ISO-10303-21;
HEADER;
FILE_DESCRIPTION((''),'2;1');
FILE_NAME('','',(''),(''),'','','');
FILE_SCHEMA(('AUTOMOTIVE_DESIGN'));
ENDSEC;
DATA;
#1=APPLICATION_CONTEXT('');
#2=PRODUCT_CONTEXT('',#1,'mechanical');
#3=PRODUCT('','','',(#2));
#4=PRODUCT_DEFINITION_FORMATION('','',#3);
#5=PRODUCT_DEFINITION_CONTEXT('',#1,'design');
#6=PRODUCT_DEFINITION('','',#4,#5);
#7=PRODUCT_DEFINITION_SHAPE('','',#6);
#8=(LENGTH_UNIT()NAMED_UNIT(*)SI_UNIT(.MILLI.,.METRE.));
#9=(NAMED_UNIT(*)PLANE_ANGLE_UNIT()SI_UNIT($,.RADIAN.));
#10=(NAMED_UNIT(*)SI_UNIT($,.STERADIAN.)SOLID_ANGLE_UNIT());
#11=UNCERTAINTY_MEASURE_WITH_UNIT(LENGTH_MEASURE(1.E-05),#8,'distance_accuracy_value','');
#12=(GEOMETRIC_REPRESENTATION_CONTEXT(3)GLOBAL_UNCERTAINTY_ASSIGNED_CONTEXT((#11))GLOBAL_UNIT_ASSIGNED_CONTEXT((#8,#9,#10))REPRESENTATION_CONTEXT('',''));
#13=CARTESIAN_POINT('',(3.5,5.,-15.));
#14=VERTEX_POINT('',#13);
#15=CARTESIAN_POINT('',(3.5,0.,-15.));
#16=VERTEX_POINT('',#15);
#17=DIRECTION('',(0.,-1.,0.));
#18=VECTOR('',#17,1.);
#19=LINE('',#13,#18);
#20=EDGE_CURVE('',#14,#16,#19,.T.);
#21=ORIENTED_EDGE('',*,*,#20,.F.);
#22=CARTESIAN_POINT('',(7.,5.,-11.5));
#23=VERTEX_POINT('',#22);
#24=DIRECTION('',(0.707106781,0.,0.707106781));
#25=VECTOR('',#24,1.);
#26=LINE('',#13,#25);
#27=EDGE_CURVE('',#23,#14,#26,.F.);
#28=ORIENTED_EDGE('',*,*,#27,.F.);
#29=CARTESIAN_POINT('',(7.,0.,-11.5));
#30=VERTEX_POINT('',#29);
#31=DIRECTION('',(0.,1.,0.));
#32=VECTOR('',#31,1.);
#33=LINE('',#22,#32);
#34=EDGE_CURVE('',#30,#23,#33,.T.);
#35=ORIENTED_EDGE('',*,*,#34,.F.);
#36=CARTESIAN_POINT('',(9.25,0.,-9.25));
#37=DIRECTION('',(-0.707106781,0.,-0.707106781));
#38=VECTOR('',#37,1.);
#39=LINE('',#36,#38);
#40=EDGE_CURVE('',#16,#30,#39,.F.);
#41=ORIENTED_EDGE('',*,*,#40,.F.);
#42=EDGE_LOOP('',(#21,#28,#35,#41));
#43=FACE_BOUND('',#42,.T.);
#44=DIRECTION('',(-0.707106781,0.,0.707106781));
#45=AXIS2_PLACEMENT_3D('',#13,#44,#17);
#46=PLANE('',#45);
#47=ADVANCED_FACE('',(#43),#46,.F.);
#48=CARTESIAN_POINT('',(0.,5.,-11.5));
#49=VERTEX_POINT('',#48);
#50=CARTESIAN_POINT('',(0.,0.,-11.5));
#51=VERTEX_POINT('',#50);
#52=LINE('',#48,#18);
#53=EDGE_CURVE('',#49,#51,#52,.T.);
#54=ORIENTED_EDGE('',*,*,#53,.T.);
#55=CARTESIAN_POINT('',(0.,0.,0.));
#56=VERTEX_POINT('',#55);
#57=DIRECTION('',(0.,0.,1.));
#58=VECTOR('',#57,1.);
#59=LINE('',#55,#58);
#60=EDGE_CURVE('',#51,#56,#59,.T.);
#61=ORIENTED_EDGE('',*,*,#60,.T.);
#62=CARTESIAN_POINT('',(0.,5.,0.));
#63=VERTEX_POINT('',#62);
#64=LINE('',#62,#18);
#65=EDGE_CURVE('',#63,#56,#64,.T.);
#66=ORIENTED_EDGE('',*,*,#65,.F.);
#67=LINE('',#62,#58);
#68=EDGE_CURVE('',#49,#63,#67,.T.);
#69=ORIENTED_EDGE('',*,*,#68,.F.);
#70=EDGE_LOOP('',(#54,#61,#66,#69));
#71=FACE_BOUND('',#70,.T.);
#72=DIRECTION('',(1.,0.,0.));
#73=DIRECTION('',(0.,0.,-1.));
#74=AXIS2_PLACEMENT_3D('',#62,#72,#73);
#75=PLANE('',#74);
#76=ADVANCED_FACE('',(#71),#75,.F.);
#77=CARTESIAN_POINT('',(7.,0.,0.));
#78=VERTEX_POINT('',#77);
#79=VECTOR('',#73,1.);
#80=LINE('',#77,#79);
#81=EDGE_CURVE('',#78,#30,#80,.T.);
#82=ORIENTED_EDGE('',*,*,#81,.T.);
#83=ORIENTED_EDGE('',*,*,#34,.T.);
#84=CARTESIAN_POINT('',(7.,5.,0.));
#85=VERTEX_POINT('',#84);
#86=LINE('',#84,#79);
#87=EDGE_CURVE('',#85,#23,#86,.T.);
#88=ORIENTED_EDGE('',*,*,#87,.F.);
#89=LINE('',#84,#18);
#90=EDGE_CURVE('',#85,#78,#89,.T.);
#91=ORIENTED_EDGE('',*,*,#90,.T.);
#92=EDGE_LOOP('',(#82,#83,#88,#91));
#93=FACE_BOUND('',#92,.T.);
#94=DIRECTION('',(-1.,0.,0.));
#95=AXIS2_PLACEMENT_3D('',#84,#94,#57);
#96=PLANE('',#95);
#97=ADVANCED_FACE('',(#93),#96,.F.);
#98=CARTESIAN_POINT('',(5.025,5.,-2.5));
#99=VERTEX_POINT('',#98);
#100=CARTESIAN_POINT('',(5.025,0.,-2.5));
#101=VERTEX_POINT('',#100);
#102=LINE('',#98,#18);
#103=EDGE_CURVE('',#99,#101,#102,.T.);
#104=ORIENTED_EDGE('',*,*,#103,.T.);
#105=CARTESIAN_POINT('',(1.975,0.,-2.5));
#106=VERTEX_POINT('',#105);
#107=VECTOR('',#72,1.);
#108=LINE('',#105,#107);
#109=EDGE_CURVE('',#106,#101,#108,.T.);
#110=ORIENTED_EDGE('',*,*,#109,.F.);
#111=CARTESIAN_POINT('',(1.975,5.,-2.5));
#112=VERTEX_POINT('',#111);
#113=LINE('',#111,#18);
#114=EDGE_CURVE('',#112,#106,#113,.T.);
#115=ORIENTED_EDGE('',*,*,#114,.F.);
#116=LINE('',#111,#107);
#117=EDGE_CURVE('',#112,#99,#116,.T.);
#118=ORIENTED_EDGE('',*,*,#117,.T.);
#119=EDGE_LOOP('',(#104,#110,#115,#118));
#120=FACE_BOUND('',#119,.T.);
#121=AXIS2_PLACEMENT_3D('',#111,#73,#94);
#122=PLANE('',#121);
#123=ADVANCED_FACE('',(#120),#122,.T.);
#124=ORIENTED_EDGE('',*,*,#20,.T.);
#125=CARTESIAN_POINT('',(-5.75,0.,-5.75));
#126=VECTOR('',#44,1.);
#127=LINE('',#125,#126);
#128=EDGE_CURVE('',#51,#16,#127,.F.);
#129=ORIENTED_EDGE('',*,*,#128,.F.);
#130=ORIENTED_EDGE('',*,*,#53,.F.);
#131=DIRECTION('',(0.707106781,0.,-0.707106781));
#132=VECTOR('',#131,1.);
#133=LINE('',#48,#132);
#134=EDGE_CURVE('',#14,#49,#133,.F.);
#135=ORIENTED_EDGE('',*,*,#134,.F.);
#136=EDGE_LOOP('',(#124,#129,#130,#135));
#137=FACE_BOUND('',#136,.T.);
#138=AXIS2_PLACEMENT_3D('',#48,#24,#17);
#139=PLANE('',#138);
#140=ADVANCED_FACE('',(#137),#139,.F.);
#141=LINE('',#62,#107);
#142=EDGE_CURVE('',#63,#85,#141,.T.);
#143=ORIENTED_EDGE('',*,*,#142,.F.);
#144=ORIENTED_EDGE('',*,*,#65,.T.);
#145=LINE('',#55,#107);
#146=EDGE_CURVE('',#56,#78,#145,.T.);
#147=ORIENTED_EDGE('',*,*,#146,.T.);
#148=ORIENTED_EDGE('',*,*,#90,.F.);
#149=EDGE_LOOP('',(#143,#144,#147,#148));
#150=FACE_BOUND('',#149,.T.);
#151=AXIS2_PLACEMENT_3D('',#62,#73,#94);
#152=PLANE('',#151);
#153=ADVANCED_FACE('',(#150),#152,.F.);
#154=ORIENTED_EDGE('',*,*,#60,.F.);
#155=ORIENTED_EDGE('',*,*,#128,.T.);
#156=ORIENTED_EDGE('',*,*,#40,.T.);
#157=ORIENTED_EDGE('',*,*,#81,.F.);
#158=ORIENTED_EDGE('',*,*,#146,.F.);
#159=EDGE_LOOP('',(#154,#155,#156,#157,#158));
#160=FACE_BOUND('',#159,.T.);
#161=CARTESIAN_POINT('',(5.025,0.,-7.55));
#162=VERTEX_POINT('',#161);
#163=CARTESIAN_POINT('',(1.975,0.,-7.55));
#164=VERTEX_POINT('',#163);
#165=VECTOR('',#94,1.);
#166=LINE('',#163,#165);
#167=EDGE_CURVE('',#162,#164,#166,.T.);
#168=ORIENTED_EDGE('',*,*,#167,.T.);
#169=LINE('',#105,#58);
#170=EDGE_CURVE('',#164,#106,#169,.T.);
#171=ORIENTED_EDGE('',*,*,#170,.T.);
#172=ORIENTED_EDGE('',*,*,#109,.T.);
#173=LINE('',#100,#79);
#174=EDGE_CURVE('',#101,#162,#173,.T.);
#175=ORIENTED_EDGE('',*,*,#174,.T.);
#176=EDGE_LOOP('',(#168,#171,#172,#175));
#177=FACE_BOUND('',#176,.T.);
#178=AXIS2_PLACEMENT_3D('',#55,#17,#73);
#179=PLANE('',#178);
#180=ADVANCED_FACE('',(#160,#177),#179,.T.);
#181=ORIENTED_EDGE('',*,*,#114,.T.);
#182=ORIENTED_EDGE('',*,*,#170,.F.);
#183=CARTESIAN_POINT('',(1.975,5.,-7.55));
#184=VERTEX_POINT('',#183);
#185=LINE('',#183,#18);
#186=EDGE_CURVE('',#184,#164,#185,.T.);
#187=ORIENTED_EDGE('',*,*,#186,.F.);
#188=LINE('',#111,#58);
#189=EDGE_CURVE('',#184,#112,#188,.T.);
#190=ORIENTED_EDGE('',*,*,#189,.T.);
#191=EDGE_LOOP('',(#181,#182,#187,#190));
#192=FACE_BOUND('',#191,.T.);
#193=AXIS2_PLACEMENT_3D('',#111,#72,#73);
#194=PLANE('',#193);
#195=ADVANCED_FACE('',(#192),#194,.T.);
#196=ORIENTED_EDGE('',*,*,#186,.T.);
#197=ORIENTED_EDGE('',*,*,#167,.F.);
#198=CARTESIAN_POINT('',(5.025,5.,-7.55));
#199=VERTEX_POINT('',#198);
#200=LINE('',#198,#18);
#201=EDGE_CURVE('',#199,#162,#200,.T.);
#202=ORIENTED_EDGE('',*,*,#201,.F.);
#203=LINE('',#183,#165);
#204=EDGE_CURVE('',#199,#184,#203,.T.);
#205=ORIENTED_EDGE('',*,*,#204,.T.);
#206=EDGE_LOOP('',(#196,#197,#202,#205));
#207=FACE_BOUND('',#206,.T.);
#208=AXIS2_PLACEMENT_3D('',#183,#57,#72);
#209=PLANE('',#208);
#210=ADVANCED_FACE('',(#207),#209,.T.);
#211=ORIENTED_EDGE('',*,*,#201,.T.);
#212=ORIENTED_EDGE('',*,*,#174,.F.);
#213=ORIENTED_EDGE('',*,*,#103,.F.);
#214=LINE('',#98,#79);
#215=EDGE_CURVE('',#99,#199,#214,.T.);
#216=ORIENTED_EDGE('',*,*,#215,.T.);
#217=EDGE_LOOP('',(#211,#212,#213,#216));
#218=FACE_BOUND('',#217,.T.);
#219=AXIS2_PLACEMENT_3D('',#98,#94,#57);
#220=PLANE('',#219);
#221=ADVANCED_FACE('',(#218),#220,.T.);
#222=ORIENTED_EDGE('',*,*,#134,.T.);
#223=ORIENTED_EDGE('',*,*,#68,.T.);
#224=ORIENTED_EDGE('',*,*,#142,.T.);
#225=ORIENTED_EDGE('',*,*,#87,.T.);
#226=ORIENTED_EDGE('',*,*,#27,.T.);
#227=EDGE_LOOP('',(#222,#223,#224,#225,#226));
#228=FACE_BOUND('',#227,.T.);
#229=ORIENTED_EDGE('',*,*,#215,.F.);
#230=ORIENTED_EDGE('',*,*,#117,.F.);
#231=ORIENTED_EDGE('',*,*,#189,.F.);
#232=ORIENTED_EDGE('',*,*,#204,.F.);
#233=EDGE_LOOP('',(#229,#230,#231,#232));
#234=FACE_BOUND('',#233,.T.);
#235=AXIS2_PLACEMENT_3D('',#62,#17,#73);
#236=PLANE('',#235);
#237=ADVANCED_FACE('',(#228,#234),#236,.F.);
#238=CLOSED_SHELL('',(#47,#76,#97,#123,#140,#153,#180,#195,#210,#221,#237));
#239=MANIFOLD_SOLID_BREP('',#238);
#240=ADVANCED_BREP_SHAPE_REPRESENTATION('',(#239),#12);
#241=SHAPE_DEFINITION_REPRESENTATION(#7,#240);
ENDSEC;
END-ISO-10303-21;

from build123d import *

# Parameters (mm, degrees)
SKETCH2_W           = 7
SKETCH2_H           = 15
SKETCH2_W_2         = 3.05
SKETCH2_H_2         = 5.05
BOSS_EXTRUDE1_DEPTH = 5
CHAMFER1_SIZE       = 3.5


with BuildPart() as part:
    # Sketch2 → Boss-Extrude1 (new body)
    with BuildSketch(Plane(origin=(0, 0, 0), x_dir=(1, 0, 0), z_dir=(0, 1, 0))):
        with Locations((3.5, 7.5)):
            Rectangle(SKETCH2_W, SKETCH2_H)
        with Locations((3.5, 5.025)):
            Rectangle(SKETCH2_W_2, SKETCH2_H_2, mode=Mode.SUBTRACT)
    extrude(amount=BOSS_EXTRUDE1_DEPTH)

    # Chamfer1
    chamfer1_edges = [part.edges().sort_by_distance(p)[0] for p in [
        (0, 2.5, -15),
        (7, 2.5, -15),
    ]]
    chamfer(chamfer1_edges, length=CHAMFER1_SIZE - 0.0001)  # a hair under: the kernel refuses the full size


solid = part.part
